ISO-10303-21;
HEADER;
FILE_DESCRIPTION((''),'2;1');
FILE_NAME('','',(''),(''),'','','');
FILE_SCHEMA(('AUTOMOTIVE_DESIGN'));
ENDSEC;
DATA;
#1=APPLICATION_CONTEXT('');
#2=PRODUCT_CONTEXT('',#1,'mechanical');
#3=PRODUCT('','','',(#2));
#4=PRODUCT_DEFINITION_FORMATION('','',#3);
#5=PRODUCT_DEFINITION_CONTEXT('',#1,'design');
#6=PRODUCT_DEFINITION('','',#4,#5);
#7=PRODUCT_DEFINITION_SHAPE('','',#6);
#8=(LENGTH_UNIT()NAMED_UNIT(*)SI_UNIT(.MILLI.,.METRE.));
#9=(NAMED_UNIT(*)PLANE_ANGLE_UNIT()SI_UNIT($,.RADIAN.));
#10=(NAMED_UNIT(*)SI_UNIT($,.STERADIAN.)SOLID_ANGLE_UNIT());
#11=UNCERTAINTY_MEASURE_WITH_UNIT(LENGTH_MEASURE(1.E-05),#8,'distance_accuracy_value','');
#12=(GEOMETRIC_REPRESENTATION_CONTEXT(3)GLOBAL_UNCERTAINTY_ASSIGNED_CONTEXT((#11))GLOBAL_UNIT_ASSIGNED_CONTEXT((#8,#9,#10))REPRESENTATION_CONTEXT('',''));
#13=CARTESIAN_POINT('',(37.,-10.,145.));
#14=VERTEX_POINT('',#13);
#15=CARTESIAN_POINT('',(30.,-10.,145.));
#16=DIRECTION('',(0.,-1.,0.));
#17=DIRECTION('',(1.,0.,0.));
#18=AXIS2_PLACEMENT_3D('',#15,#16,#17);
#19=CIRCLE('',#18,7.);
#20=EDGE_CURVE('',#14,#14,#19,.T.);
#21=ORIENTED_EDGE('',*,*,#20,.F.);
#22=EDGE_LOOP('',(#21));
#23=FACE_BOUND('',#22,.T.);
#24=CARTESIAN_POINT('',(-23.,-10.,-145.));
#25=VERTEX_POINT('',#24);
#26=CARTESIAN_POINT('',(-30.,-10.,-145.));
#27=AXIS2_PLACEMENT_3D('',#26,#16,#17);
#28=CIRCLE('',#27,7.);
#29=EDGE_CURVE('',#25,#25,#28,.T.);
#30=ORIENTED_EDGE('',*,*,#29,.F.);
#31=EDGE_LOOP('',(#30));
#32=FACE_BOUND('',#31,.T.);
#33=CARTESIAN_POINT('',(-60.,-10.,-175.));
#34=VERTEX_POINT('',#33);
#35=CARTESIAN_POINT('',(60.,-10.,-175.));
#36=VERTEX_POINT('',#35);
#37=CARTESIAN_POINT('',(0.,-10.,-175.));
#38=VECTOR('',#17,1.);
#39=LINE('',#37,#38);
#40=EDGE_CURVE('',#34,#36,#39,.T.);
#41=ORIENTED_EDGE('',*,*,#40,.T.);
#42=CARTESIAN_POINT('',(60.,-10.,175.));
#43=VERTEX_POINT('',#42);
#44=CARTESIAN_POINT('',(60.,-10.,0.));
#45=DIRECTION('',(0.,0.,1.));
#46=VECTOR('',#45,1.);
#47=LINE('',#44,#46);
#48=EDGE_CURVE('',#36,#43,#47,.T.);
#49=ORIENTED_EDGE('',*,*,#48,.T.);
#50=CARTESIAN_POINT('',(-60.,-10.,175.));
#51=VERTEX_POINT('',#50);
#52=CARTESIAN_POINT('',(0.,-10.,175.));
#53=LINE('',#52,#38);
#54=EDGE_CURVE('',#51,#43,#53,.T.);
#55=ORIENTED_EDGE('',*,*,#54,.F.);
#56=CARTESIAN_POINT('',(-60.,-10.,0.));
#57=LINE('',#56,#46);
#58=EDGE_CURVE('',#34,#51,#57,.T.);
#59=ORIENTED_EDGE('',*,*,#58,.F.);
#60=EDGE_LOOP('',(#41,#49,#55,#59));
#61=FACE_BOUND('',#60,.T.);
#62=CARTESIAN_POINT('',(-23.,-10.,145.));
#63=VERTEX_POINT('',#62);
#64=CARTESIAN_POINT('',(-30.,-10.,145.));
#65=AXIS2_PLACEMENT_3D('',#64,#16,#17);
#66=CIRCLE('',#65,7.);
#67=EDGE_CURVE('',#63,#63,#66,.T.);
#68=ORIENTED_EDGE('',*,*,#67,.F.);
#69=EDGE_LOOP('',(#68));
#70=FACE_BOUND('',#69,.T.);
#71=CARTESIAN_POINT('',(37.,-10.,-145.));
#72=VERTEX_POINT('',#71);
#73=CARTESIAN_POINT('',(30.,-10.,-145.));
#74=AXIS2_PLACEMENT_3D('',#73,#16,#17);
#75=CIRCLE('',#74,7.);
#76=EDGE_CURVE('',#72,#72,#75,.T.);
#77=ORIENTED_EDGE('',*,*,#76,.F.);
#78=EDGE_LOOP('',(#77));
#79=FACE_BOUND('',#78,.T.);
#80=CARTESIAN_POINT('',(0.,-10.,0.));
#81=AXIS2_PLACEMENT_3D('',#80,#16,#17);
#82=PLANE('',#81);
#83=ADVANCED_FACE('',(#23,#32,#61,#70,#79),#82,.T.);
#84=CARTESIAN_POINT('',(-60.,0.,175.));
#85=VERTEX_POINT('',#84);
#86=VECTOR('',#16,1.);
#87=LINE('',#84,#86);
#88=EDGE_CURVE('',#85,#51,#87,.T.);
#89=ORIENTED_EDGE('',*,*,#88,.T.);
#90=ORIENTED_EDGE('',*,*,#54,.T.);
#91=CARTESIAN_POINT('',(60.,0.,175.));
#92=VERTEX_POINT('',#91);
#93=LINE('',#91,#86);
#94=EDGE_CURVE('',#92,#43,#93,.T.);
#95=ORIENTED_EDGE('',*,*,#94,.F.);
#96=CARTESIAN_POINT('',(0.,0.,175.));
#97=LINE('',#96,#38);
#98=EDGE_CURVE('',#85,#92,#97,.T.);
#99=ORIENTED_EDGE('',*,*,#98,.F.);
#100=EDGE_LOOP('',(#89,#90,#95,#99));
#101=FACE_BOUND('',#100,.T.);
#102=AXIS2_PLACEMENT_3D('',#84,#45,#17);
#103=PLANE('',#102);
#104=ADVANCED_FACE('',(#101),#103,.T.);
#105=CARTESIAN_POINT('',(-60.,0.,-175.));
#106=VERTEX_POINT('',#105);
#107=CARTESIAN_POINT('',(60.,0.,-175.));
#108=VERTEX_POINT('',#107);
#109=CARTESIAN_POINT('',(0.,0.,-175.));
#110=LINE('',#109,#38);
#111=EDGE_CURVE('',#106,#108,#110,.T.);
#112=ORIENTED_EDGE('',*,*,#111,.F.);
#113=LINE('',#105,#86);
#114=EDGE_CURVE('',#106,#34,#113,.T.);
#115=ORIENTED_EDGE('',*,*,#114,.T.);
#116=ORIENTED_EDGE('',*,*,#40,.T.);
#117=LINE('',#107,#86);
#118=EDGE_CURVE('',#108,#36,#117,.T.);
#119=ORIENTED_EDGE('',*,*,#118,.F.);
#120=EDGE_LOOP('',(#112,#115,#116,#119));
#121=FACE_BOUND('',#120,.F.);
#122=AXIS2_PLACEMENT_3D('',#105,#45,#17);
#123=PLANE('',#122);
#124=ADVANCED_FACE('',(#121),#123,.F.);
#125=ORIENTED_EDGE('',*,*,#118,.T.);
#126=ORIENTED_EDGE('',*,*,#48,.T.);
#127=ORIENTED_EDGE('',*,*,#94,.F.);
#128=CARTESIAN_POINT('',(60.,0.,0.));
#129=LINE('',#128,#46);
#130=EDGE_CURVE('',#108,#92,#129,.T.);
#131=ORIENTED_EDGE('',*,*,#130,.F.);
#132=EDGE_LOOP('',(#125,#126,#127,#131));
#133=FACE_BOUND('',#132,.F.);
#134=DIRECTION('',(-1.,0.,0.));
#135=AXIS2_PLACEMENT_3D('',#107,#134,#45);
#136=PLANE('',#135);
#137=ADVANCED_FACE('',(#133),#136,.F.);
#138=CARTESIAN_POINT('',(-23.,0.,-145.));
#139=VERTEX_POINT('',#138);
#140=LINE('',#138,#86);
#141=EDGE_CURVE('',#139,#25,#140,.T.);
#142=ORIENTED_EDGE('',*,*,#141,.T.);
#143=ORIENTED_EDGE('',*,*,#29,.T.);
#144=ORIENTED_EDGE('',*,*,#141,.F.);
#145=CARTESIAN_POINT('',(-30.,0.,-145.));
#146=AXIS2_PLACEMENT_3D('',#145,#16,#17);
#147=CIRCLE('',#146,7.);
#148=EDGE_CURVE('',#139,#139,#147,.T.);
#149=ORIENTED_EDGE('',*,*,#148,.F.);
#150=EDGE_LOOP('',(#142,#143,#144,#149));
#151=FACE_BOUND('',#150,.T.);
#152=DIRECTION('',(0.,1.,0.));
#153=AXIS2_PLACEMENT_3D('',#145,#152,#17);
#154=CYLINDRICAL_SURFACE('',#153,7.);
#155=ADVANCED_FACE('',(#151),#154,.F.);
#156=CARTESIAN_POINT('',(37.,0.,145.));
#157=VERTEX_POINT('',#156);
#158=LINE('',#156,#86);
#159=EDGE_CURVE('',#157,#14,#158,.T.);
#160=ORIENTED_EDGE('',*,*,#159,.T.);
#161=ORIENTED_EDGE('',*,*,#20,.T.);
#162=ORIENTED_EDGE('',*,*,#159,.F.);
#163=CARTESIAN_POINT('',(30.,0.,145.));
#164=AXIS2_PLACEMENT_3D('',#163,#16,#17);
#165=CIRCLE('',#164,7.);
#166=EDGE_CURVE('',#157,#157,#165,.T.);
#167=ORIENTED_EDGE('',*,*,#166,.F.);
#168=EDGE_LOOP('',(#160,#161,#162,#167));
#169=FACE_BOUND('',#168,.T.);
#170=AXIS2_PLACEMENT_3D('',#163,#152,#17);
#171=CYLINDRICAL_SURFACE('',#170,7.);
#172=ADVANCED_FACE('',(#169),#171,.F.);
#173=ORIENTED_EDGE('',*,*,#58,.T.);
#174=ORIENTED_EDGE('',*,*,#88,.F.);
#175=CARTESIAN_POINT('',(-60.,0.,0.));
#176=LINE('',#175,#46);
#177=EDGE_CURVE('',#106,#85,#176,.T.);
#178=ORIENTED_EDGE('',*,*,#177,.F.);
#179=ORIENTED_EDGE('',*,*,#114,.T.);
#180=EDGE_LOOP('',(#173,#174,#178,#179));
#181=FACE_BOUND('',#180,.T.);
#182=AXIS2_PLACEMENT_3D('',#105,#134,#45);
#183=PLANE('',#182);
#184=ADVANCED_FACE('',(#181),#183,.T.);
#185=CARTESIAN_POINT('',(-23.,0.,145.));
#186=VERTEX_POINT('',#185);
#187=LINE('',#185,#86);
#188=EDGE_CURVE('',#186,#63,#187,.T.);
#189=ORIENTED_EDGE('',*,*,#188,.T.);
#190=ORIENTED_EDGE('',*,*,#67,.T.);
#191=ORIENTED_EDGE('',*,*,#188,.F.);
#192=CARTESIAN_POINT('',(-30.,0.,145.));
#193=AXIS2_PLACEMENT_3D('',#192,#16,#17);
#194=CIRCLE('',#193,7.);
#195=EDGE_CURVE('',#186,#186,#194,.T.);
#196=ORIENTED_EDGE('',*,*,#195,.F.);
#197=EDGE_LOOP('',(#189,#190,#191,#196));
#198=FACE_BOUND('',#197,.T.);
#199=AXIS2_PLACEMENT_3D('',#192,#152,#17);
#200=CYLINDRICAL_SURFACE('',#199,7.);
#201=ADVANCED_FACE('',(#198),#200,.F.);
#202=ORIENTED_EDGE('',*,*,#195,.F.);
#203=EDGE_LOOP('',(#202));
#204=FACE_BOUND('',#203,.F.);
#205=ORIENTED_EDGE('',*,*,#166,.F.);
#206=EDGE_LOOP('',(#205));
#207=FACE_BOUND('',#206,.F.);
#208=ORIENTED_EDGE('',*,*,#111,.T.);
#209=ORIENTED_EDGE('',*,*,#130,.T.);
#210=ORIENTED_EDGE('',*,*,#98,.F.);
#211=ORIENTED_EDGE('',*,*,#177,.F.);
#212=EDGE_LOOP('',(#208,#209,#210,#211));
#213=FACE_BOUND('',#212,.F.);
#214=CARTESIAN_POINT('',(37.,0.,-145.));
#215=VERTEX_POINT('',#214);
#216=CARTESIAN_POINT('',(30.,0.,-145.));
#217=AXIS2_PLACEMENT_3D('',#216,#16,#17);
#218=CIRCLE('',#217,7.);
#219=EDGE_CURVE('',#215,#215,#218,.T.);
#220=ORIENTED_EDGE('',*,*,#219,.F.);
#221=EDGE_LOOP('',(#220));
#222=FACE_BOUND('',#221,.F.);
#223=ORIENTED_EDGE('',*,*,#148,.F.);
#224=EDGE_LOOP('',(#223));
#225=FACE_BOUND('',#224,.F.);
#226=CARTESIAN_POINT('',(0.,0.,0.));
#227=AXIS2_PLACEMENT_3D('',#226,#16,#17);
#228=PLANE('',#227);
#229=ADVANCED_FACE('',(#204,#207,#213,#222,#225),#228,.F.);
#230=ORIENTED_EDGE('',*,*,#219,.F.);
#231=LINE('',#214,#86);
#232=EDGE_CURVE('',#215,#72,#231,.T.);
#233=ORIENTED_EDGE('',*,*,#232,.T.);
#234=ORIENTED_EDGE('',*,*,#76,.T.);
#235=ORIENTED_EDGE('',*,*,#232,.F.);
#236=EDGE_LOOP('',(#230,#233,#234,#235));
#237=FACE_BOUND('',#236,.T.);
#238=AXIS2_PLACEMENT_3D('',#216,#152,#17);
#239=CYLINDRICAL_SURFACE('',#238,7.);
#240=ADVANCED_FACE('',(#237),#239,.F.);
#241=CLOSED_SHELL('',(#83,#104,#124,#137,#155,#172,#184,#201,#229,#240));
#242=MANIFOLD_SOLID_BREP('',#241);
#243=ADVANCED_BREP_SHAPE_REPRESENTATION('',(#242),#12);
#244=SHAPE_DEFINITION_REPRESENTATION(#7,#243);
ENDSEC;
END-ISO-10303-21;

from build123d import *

# Parameters (mm, degrees)
F0_W     = 120
F0_H     = 350
F0_R     = 7
F1_DEPTH = 10


# Not quite as in the source:
# - a feature names something its author has since deleted; it is built from what else it names


with BuildPart() as f1:
    # F0 (on Front) → F1 (new body)
    with BuildSketch(Plane.XZ):
        Rectangle(F0_W, F0_H)
        with Locations((-30, -145)):
            Circle(F0_R, mode=Mode.SUBTRACT)
        with Locations((30, -145)):
            Circle(F0_R, mode=Mode.SUBTRACT)
        with Locations((-30, 145)):
            Circle(F0_R, mode=Mode.SUBTRACT)
        with Locations((30, 145)):
            Circle(F0_R, mode=Mode.SUBTRACT)
    extrude(amount=F1_DEPTH)


solid = f1.part
